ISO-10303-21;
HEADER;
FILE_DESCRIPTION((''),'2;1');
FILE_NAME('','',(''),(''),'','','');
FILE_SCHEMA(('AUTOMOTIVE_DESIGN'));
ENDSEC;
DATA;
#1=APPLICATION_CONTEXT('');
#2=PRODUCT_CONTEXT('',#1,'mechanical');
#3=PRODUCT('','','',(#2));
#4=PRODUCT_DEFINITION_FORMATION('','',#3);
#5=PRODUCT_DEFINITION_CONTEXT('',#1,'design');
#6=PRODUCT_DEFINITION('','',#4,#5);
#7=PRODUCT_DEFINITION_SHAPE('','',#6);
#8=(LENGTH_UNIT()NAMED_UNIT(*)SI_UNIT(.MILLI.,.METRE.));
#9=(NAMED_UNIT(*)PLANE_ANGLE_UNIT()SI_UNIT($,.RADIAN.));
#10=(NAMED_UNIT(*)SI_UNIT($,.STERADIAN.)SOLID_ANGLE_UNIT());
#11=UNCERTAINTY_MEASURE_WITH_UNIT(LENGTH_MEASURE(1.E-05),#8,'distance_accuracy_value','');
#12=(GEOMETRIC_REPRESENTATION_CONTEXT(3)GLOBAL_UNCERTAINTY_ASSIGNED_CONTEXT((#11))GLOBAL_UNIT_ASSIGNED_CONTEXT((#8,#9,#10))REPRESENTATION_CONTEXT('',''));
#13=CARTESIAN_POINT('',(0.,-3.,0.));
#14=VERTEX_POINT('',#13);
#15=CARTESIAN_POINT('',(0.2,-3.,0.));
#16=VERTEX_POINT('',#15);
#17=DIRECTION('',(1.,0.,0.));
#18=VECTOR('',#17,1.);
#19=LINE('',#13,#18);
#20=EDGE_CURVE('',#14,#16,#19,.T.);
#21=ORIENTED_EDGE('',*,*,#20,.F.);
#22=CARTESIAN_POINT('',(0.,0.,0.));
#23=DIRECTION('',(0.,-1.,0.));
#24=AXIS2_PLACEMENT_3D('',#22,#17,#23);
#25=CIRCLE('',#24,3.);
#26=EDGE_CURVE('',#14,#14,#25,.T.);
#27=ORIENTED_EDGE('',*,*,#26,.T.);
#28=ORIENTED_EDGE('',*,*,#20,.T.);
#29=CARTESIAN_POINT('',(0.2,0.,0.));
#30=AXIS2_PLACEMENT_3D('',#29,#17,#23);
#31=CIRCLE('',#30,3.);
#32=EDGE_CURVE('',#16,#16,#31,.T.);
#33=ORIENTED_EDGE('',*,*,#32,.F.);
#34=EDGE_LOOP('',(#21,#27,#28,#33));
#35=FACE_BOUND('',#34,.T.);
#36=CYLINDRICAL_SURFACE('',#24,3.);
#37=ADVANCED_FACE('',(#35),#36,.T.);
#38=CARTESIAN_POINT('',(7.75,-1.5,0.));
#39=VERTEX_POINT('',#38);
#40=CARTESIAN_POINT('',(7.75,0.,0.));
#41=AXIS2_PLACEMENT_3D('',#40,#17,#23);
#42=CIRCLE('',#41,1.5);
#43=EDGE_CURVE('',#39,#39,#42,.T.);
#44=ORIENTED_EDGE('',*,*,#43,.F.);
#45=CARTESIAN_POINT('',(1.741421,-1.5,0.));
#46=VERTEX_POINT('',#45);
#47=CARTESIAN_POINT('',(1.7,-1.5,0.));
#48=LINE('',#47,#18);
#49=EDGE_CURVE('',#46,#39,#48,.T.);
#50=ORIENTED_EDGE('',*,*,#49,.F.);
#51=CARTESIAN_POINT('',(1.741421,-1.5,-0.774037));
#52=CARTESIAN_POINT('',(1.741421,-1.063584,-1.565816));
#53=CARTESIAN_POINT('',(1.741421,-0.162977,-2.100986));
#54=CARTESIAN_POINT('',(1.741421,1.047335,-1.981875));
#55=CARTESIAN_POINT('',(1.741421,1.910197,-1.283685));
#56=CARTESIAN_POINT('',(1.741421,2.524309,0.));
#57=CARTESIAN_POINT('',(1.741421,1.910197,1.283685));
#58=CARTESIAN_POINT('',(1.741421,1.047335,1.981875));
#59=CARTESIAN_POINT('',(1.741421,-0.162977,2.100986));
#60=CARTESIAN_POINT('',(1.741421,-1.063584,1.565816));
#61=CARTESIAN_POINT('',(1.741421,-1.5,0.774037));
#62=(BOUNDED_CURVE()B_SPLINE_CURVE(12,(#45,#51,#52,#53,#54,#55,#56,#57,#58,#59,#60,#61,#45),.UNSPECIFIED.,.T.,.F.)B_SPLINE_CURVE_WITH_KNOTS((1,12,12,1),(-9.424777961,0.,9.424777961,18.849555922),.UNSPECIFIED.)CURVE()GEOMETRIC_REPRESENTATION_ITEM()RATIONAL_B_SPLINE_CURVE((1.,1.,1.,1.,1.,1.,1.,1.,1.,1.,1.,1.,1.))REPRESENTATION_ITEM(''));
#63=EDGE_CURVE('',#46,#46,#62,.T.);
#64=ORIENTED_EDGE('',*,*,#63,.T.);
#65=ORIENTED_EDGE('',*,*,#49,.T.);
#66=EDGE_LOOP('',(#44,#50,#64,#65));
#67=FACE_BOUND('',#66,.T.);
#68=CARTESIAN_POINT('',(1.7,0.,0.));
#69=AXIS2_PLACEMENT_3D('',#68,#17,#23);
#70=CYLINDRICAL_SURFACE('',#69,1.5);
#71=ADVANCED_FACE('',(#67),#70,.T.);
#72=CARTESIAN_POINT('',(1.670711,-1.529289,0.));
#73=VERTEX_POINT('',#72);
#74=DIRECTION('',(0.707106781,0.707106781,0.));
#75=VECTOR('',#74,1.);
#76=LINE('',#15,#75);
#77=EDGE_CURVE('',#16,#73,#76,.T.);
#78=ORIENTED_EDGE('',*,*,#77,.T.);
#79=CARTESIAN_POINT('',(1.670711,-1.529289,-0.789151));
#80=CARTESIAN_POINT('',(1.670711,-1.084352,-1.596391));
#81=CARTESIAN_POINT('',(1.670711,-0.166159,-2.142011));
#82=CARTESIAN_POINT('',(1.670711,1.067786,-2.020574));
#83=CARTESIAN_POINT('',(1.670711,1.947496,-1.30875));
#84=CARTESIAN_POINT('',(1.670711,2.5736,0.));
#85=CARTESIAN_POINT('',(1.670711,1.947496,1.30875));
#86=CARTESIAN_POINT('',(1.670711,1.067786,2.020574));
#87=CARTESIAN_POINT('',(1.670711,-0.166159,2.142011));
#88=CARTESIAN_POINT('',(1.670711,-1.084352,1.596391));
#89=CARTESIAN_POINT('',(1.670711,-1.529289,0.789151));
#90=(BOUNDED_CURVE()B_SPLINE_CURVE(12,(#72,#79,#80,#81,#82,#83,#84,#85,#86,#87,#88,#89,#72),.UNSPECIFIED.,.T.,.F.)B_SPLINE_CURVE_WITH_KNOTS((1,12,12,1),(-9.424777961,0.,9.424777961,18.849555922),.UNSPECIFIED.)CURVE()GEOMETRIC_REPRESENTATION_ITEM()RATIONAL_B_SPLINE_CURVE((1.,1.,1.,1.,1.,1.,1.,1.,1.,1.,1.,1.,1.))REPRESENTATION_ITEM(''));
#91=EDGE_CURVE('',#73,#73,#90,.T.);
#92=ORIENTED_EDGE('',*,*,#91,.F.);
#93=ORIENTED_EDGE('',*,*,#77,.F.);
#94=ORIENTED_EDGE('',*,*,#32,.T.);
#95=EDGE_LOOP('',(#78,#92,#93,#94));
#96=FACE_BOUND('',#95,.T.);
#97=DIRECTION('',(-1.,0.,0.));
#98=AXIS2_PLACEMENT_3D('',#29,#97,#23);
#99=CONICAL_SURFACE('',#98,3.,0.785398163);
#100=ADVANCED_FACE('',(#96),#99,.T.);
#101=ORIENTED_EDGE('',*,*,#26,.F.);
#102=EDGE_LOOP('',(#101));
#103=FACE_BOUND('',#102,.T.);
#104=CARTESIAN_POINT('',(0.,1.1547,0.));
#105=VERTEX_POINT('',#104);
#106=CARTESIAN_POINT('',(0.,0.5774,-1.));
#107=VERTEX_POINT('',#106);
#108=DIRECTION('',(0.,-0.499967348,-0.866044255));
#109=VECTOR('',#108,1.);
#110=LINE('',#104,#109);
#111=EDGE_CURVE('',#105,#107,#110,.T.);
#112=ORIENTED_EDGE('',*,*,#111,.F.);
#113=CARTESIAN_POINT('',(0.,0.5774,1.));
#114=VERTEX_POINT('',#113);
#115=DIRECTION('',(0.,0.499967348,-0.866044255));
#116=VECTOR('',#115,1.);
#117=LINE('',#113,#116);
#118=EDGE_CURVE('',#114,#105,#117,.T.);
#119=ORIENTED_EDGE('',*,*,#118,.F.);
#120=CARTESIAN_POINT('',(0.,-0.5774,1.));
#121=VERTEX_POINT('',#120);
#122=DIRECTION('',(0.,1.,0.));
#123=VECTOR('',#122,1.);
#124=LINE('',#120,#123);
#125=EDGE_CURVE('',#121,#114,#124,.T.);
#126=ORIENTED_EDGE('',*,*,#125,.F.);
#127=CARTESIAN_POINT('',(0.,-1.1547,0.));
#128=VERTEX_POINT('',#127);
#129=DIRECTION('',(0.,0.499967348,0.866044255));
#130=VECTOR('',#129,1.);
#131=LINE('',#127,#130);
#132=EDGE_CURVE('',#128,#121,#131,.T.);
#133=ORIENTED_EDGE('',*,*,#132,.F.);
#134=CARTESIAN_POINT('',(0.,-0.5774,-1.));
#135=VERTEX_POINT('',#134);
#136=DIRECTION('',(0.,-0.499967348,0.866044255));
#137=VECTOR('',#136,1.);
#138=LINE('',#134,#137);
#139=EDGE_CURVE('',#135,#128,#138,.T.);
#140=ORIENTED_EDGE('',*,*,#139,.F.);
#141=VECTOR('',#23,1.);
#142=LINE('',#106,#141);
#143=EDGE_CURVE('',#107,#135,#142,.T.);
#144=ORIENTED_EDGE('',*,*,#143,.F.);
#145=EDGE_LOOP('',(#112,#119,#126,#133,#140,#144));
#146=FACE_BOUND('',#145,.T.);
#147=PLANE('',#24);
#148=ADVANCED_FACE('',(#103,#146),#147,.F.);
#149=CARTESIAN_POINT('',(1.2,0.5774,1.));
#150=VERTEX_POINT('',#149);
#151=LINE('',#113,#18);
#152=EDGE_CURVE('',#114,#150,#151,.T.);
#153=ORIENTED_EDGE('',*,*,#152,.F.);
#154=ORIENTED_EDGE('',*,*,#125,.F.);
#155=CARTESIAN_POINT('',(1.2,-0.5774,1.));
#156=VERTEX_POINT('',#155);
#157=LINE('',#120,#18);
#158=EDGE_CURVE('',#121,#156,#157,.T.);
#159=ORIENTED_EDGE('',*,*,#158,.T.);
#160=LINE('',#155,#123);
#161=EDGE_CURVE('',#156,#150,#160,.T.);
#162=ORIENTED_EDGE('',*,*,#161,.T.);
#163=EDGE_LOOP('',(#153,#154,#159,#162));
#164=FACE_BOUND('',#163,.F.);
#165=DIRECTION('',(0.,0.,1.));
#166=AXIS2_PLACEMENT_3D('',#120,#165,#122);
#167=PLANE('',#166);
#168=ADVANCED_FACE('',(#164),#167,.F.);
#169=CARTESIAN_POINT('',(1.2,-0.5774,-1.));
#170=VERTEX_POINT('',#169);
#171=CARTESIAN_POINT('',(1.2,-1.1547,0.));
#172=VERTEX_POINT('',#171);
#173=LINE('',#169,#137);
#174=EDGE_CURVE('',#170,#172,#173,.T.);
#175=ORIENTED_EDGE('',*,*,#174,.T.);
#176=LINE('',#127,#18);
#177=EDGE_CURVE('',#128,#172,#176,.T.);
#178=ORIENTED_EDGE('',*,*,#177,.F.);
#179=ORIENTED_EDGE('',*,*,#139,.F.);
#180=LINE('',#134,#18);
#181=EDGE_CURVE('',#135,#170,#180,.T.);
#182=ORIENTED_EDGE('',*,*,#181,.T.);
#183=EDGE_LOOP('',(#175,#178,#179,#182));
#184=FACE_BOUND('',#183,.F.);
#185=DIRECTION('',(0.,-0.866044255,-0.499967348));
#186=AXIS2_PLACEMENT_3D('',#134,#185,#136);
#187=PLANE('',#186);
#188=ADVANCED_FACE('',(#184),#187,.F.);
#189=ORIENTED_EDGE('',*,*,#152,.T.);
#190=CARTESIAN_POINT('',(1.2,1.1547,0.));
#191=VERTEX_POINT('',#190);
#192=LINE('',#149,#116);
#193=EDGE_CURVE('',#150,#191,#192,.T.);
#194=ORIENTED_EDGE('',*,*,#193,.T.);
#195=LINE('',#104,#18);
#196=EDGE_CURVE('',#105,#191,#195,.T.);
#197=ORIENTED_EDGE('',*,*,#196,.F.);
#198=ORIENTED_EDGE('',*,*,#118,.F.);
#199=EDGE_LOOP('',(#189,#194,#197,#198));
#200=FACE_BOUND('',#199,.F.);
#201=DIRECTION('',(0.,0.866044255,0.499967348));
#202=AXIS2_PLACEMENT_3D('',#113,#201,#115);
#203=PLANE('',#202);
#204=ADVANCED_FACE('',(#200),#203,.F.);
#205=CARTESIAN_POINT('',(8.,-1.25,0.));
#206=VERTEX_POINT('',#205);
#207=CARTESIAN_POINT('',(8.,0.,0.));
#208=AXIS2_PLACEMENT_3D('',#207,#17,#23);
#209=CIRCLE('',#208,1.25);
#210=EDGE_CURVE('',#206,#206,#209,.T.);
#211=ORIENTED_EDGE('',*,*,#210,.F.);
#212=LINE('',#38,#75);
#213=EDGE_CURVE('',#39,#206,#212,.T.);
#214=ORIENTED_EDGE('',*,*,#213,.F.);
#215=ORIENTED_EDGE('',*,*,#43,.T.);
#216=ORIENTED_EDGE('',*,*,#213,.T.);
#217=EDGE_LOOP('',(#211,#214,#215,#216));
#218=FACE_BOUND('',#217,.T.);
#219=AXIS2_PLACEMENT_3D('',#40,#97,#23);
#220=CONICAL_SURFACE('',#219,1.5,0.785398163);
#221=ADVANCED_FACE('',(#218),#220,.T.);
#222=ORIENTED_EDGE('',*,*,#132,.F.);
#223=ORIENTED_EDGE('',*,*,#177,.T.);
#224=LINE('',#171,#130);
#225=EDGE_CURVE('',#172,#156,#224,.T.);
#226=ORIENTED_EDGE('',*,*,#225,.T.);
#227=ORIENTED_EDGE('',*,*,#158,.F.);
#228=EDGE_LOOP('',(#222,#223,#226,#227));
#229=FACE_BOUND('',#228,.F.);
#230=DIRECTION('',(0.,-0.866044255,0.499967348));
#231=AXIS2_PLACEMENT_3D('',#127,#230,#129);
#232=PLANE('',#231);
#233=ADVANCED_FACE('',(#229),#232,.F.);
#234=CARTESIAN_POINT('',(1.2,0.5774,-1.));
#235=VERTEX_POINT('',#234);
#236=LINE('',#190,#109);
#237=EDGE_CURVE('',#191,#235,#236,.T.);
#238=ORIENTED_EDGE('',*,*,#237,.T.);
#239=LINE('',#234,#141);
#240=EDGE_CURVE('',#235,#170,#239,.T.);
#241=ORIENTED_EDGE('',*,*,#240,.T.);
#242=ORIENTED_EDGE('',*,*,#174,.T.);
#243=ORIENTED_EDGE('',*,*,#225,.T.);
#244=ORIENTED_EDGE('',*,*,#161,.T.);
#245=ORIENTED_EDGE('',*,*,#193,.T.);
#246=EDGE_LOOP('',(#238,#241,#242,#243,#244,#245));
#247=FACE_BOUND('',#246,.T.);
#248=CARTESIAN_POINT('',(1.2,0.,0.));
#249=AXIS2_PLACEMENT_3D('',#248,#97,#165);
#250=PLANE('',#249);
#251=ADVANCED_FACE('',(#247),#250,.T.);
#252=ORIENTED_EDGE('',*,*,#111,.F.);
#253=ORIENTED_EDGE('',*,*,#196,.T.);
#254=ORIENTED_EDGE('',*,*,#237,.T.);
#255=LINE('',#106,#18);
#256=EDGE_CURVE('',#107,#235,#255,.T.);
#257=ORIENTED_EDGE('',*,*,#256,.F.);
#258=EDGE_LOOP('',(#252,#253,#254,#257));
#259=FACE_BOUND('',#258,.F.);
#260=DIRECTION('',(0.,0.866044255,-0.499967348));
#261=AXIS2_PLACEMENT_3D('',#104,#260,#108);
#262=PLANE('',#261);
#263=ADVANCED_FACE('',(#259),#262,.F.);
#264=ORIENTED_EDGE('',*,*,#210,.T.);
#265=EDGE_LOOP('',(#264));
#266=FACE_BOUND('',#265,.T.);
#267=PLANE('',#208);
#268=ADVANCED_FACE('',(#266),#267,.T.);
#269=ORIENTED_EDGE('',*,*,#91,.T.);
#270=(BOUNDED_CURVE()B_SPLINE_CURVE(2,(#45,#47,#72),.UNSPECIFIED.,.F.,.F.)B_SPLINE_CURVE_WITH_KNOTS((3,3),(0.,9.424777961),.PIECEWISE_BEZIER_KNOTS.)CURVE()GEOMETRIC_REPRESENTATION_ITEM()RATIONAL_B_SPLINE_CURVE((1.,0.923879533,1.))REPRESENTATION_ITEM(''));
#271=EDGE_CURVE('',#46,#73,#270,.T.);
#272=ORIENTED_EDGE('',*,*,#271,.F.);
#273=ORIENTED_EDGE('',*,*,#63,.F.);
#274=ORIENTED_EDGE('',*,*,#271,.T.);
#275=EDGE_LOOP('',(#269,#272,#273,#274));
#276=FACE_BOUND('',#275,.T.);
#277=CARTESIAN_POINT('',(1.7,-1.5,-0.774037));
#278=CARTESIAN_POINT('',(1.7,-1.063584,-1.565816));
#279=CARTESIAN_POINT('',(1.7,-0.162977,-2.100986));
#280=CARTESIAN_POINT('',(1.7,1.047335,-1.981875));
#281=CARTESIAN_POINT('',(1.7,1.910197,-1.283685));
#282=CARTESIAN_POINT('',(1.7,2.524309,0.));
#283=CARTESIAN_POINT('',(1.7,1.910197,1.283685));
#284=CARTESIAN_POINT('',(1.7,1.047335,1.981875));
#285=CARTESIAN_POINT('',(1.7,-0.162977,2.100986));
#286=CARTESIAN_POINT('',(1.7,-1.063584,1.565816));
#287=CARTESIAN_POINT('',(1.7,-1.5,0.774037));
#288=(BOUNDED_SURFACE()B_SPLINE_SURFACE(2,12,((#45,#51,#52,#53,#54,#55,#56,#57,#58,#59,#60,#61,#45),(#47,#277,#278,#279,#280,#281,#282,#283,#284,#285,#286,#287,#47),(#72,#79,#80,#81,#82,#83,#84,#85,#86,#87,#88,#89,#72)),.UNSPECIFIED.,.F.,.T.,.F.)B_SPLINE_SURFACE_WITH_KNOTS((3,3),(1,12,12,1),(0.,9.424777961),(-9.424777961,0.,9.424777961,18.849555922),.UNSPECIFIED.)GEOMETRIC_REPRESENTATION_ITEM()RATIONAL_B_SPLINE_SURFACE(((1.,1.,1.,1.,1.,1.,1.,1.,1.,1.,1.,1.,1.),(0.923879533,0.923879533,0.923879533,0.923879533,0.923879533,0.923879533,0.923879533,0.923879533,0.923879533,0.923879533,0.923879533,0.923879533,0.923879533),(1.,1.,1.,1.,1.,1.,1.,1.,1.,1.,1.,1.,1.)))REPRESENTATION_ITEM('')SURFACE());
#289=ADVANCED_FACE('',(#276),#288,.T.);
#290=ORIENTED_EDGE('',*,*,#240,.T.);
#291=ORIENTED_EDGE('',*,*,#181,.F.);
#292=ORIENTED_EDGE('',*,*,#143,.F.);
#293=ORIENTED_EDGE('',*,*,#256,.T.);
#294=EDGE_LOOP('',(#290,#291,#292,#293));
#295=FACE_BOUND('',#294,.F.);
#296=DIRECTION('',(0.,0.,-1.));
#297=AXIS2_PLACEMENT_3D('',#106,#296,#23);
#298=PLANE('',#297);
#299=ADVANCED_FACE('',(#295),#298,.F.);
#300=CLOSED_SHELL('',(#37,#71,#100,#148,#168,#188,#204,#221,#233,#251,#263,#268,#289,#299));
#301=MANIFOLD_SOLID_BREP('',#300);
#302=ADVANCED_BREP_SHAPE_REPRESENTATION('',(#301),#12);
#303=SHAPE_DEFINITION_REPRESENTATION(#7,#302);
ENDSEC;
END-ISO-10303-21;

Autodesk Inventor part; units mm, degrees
ref_plane "YZ Plane" through (0, 0, 0) normal (1, 0, 0) x (0, 1, 0)
sketch "Sketch1" plane through (0, 0, 0) normal (0, 1, 0) x (-1, 0, 0)
  point P0 (0, 0)
sketch "Sketch2" plane through (0, 0, 0) normal (0, 0, 1) x (-1, 0, 0)
  line L0 (-8, 1.5) -> (-8, 0)
  line L1 (-1.7, 1.5) -> (-8, 1.5)
  line L2 (-0.2, 3) -> (-1.7, 1.5)
  line L3 (0, 3) -> (-0.2, 3)
  line L4 (0, 0) -> (0, 3)
  line L5 (-8, 0) -> (0, 0)
  line L6 (-8, 0) -> (0, 0)
  line L7 (0, -9.6) -> (0, 1.6) projected
  line L8 (1.6, 0) -> (-9.6, 0) projected
  dimension "ParC" = 0.2
  dimension "d43" = 45
  dimension "d44" = 3
  dimension "d45" = 1.5
  dimension "d46" = 8
  dimension "d47" = 0
  dimension "d48" = 0
revolve "Revolution1" add sketch "Sketch2" angle 360 about axis through (8, 0, 0) along (1, 0, 0)
sketch "Sketch3" plane through (0, 0, 0) normal (-1, 0, 0) x (0, 0, 1)
  line L0 (-1, 0.5774) -> (-1, -0.5774)
  line L1 (0, 1.1547) -> (-1, 0.5774)
  line L2 (1, 0.5774) -> (0, 1.1547)
  line L3 (1, -0.5774) -> (1, 0.5774)
  line L4 (0, -1.1547) -> (1, -0.5774)
  line L5 (-1, -0.5774) -> (0, -1.1547)
  circle A0 centre (0, 0) radius 1 construction
  circle A1 centre (0, 0) radius 1.5 construction
  dimension "d11" = 2
  dimension "d13" = 120
  dimension "d15" = 120
extrude "Extrusion1" cut sketch "Sketch3" against normal blind 1.2
fillet "Fillet1" radius 0.1 1 edges at (1.7, 1.5, 0)
chamfer "Chamfer1" distance 0.25 angle 45 1 edges at (8, 1.5, 0) measured on face at (5.9138, -1.4041, 0.5277)
thread "Thread1" size "M3x0.5" class "6g" standard "ISO Metric profile" length 5.3
ref_plane "MSC_PF1" through (0, 0, 0) normal (1, 0, 0) x (0, 1, 0)
ref_plane "MSC_PT1" through (0, 0, 0) normal (1, 0, 0) x (0, 1, 0)
equation "\"d43\" = 0.5 * ang"
equation "\"d44\" = 0.5 * dk"
equation "\"d45\" = 0.5 * NND"
equation "\"d46\" = NLG"
equation "\"d18\" = r"
equation "\"d19\" = 0.5 * PTC"
equation "\"d39\" = 0.5 * PTC"
equation "\"d11\" = ParS"
equation "\"d16\" = ParT"
equation "\"NND\" = 3"
equation "\"PTC\" = 0.5"
equation "\"dk\" = 6"
equation "\"ParK\" = 1.7"
equation "\"ParS\" = 2"
equation "\"ParT\" = 1.2"
equation "\"r\" = 0.1"
equation "\"NLG\" = 8"
equation "\"ang\" = 90deg"
equation "\"THREADDIA\" = NND"
properties part number "ISO 10642 - M3 x  8" material "Steel"
